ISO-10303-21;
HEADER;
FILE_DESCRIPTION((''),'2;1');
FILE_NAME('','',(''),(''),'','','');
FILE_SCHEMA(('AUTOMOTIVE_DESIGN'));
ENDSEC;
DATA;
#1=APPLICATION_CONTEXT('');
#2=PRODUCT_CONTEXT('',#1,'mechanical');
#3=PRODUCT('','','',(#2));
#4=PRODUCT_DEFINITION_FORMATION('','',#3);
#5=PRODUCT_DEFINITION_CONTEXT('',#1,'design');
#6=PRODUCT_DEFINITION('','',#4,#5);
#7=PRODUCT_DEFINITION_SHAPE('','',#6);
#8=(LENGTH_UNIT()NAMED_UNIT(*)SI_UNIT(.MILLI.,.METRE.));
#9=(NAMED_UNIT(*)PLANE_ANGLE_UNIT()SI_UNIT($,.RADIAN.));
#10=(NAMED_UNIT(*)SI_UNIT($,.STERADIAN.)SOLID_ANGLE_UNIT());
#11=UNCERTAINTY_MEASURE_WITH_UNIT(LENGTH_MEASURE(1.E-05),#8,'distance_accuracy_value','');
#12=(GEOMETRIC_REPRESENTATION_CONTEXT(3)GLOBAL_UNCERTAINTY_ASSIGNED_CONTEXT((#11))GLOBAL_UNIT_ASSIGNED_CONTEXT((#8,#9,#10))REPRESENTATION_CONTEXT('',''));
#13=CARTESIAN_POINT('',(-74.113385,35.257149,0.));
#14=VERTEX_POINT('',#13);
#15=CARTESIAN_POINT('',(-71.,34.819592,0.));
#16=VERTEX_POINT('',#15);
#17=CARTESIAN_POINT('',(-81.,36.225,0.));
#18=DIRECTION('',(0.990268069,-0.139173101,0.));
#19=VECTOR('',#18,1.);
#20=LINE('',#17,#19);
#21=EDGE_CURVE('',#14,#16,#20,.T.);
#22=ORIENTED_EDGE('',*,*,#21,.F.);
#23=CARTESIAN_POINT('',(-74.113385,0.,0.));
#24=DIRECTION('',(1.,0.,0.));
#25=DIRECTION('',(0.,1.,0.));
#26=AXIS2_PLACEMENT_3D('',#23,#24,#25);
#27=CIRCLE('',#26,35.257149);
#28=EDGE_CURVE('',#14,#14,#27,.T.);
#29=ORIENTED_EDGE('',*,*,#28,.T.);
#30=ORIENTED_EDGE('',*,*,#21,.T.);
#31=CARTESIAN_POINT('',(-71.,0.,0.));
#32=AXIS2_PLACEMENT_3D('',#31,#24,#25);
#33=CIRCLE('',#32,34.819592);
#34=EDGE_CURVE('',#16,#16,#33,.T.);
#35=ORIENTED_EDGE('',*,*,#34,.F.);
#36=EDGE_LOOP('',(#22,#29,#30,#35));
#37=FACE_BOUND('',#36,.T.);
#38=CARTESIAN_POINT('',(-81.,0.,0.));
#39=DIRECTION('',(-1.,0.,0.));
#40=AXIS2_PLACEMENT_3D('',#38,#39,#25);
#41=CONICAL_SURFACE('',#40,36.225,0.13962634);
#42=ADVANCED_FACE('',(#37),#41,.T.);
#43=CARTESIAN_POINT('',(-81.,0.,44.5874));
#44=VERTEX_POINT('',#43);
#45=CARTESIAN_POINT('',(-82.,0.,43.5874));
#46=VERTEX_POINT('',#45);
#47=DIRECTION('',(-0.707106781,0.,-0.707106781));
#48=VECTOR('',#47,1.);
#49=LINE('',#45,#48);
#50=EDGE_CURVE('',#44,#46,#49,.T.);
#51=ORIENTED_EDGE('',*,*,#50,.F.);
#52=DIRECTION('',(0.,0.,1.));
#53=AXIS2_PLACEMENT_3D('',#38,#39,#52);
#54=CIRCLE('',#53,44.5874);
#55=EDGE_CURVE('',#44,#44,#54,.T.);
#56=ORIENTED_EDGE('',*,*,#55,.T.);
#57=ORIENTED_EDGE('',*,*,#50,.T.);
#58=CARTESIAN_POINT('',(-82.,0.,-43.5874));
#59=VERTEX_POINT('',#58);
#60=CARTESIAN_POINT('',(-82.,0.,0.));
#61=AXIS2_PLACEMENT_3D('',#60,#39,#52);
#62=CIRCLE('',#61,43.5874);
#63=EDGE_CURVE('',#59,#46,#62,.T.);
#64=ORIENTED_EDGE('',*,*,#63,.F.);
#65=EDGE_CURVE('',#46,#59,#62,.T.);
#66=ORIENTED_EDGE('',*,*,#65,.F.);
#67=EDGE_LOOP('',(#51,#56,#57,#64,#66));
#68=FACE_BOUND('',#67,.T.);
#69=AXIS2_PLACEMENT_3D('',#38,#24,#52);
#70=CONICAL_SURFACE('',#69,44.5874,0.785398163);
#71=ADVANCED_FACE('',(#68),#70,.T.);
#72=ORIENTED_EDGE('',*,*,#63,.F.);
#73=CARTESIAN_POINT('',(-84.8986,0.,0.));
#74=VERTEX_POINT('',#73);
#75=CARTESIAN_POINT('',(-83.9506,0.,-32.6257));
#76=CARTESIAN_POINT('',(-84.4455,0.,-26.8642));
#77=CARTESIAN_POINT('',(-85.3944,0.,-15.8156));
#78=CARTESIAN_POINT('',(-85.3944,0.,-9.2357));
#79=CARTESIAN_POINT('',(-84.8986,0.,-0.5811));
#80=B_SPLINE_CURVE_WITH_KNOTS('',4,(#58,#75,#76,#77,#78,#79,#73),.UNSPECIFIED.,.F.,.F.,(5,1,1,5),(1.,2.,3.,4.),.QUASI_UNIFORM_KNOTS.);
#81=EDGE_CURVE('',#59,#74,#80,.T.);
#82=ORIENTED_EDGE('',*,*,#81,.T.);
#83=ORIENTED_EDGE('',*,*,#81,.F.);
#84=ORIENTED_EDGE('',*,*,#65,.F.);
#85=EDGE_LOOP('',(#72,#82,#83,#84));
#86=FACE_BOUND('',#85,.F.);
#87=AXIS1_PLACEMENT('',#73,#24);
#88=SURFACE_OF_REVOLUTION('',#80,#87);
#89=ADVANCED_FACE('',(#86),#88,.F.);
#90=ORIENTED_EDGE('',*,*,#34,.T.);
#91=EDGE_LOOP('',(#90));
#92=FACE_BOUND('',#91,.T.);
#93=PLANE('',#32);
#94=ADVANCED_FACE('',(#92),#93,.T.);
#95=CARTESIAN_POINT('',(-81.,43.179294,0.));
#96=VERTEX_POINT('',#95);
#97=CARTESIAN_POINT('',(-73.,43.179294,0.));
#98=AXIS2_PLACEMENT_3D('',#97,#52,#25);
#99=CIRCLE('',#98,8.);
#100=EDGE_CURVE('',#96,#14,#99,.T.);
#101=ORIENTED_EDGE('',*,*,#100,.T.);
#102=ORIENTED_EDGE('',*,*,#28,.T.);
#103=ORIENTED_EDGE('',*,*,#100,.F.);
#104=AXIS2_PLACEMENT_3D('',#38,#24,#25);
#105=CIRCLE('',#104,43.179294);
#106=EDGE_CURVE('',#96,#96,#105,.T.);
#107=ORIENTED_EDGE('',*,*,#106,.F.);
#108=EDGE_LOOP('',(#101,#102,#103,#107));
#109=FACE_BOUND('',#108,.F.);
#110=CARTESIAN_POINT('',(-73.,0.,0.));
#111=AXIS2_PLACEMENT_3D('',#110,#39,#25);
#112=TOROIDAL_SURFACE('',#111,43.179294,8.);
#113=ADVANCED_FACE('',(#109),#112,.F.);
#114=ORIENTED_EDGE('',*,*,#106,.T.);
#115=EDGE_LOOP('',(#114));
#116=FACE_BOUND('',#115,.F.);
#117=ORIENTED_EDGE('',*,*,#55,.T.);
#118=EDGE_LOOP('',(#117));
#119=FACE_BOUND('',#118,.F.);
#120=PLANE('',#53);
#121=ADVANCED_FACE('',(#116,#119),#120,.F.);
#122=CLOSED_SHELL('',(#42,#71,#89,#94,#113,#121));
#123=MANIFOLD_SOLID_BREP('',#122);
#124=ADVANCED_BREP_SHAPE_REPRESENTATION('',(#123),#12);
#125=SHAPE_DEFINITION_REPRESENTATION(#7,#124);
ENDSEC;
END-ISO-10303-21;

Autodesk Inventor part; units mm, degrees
ref_plane "XZ Plane" through (0, 0, 0) normal (0, 1, 0) x (-1, 0, 0)
ref_plane "XY Plane" through (0, 0, 0) normal (0, 0, 1) x (1, 0, 0)
ref_plane "Work Plane5" through (-81, 0, 0) normal (1, 0, 0) x (0, 1, 0)
sketch "Sketch9" plane through (-81, 0, 0) normal (1, 0, 0) x (0, 1, 0)
  circle A0 centre (0, 0) radius 36.225
  dimension "d79" = 72.45
extrude "Extrusion5" add sketch "Sketch9" along normal blind 10 draft -8
sketch "Sketch10" plane through (-81, 0, 0) normal (-1, 0, 0) x (0, 0, 1)
  circle A0 centre (0, 0) radius 43.5874
extrude "Extrusion6" add sketch "Sketch10" along normal blind 1
fillet "Fillet12" radius 8 1 edges at (-81, -36.225, 0)
draft "FaceDraft1" angle 45 pull direction (-1, 0, 0) faces at (-81.6667, -40.4135, -16.3281) fixed edges at (-82, 0, -43.5874)
sketch "Sketch16" plane through (0, 0, 0) normal (0, 1, 0) x (-1, 0, 0)
  line L0 (82, -43.5874) -> (82, 43.5874) projected
  line L1 (82, -43.5874) -> (83.9506, -32.6257) construction
  line L2 (83.9506, -32.6257) -> (84.4455, -26.8642) construction
  line L3 (84.4455, -26.8642) -> (85.3944, -15.8156) construction
  line L4 (85.3944, -15.8156) -> (85.3944, -9.2357) construction
  line L5 (85.3944, -9.2357) -> (84.8986, -0.5811) construction
  line L6 (84.8986, -0.5811) -> (84.8986, 0) construction
  spline S0 degree 4 poles (82, -43.5874) (83.9506, -32.6257) (84.4455, -26.8642) (85.3944, -15.8156) (85.3944, -9.2357) (84.8986, -0.5811) (84.8986, 0) knots 1 1 1 1 1 2 3 4 4 4 4 4
  line L7 (84.8986, 0) -> (82, 0)
  point P0 (0, 0)
revolve "Revolution3" add sketch "Sketch16" angle 360 about axis through (-84.8986, 0, 0) along (1, 0, 0)
ref_plane "Work Plane7" through (-96.5, 0, 0) normal (1, 0, 0) x (0, 0, -1)
sketch "Sketch23" plane through (-96.5, 0, 0) normal (1, 0, 0) x (0, 0, -1)
  line L0 (-47.6775, 46.8192) -> (46.7277, 46.8192) construction
  line L1 (46.7277, 46.8192) -> (46.7277, -47.7154) construction
  line L2 (46.7277, -47.7154) -> (-47.6775, -47.7154) construction
  line L3 (-47.6775, -47.7154) -> (-47.6775, 46.8192) construction
  point P0 (0, 0)
properties part number "BMW Cap dish decal ready to attach" material "Brass, Soft Yellow"
